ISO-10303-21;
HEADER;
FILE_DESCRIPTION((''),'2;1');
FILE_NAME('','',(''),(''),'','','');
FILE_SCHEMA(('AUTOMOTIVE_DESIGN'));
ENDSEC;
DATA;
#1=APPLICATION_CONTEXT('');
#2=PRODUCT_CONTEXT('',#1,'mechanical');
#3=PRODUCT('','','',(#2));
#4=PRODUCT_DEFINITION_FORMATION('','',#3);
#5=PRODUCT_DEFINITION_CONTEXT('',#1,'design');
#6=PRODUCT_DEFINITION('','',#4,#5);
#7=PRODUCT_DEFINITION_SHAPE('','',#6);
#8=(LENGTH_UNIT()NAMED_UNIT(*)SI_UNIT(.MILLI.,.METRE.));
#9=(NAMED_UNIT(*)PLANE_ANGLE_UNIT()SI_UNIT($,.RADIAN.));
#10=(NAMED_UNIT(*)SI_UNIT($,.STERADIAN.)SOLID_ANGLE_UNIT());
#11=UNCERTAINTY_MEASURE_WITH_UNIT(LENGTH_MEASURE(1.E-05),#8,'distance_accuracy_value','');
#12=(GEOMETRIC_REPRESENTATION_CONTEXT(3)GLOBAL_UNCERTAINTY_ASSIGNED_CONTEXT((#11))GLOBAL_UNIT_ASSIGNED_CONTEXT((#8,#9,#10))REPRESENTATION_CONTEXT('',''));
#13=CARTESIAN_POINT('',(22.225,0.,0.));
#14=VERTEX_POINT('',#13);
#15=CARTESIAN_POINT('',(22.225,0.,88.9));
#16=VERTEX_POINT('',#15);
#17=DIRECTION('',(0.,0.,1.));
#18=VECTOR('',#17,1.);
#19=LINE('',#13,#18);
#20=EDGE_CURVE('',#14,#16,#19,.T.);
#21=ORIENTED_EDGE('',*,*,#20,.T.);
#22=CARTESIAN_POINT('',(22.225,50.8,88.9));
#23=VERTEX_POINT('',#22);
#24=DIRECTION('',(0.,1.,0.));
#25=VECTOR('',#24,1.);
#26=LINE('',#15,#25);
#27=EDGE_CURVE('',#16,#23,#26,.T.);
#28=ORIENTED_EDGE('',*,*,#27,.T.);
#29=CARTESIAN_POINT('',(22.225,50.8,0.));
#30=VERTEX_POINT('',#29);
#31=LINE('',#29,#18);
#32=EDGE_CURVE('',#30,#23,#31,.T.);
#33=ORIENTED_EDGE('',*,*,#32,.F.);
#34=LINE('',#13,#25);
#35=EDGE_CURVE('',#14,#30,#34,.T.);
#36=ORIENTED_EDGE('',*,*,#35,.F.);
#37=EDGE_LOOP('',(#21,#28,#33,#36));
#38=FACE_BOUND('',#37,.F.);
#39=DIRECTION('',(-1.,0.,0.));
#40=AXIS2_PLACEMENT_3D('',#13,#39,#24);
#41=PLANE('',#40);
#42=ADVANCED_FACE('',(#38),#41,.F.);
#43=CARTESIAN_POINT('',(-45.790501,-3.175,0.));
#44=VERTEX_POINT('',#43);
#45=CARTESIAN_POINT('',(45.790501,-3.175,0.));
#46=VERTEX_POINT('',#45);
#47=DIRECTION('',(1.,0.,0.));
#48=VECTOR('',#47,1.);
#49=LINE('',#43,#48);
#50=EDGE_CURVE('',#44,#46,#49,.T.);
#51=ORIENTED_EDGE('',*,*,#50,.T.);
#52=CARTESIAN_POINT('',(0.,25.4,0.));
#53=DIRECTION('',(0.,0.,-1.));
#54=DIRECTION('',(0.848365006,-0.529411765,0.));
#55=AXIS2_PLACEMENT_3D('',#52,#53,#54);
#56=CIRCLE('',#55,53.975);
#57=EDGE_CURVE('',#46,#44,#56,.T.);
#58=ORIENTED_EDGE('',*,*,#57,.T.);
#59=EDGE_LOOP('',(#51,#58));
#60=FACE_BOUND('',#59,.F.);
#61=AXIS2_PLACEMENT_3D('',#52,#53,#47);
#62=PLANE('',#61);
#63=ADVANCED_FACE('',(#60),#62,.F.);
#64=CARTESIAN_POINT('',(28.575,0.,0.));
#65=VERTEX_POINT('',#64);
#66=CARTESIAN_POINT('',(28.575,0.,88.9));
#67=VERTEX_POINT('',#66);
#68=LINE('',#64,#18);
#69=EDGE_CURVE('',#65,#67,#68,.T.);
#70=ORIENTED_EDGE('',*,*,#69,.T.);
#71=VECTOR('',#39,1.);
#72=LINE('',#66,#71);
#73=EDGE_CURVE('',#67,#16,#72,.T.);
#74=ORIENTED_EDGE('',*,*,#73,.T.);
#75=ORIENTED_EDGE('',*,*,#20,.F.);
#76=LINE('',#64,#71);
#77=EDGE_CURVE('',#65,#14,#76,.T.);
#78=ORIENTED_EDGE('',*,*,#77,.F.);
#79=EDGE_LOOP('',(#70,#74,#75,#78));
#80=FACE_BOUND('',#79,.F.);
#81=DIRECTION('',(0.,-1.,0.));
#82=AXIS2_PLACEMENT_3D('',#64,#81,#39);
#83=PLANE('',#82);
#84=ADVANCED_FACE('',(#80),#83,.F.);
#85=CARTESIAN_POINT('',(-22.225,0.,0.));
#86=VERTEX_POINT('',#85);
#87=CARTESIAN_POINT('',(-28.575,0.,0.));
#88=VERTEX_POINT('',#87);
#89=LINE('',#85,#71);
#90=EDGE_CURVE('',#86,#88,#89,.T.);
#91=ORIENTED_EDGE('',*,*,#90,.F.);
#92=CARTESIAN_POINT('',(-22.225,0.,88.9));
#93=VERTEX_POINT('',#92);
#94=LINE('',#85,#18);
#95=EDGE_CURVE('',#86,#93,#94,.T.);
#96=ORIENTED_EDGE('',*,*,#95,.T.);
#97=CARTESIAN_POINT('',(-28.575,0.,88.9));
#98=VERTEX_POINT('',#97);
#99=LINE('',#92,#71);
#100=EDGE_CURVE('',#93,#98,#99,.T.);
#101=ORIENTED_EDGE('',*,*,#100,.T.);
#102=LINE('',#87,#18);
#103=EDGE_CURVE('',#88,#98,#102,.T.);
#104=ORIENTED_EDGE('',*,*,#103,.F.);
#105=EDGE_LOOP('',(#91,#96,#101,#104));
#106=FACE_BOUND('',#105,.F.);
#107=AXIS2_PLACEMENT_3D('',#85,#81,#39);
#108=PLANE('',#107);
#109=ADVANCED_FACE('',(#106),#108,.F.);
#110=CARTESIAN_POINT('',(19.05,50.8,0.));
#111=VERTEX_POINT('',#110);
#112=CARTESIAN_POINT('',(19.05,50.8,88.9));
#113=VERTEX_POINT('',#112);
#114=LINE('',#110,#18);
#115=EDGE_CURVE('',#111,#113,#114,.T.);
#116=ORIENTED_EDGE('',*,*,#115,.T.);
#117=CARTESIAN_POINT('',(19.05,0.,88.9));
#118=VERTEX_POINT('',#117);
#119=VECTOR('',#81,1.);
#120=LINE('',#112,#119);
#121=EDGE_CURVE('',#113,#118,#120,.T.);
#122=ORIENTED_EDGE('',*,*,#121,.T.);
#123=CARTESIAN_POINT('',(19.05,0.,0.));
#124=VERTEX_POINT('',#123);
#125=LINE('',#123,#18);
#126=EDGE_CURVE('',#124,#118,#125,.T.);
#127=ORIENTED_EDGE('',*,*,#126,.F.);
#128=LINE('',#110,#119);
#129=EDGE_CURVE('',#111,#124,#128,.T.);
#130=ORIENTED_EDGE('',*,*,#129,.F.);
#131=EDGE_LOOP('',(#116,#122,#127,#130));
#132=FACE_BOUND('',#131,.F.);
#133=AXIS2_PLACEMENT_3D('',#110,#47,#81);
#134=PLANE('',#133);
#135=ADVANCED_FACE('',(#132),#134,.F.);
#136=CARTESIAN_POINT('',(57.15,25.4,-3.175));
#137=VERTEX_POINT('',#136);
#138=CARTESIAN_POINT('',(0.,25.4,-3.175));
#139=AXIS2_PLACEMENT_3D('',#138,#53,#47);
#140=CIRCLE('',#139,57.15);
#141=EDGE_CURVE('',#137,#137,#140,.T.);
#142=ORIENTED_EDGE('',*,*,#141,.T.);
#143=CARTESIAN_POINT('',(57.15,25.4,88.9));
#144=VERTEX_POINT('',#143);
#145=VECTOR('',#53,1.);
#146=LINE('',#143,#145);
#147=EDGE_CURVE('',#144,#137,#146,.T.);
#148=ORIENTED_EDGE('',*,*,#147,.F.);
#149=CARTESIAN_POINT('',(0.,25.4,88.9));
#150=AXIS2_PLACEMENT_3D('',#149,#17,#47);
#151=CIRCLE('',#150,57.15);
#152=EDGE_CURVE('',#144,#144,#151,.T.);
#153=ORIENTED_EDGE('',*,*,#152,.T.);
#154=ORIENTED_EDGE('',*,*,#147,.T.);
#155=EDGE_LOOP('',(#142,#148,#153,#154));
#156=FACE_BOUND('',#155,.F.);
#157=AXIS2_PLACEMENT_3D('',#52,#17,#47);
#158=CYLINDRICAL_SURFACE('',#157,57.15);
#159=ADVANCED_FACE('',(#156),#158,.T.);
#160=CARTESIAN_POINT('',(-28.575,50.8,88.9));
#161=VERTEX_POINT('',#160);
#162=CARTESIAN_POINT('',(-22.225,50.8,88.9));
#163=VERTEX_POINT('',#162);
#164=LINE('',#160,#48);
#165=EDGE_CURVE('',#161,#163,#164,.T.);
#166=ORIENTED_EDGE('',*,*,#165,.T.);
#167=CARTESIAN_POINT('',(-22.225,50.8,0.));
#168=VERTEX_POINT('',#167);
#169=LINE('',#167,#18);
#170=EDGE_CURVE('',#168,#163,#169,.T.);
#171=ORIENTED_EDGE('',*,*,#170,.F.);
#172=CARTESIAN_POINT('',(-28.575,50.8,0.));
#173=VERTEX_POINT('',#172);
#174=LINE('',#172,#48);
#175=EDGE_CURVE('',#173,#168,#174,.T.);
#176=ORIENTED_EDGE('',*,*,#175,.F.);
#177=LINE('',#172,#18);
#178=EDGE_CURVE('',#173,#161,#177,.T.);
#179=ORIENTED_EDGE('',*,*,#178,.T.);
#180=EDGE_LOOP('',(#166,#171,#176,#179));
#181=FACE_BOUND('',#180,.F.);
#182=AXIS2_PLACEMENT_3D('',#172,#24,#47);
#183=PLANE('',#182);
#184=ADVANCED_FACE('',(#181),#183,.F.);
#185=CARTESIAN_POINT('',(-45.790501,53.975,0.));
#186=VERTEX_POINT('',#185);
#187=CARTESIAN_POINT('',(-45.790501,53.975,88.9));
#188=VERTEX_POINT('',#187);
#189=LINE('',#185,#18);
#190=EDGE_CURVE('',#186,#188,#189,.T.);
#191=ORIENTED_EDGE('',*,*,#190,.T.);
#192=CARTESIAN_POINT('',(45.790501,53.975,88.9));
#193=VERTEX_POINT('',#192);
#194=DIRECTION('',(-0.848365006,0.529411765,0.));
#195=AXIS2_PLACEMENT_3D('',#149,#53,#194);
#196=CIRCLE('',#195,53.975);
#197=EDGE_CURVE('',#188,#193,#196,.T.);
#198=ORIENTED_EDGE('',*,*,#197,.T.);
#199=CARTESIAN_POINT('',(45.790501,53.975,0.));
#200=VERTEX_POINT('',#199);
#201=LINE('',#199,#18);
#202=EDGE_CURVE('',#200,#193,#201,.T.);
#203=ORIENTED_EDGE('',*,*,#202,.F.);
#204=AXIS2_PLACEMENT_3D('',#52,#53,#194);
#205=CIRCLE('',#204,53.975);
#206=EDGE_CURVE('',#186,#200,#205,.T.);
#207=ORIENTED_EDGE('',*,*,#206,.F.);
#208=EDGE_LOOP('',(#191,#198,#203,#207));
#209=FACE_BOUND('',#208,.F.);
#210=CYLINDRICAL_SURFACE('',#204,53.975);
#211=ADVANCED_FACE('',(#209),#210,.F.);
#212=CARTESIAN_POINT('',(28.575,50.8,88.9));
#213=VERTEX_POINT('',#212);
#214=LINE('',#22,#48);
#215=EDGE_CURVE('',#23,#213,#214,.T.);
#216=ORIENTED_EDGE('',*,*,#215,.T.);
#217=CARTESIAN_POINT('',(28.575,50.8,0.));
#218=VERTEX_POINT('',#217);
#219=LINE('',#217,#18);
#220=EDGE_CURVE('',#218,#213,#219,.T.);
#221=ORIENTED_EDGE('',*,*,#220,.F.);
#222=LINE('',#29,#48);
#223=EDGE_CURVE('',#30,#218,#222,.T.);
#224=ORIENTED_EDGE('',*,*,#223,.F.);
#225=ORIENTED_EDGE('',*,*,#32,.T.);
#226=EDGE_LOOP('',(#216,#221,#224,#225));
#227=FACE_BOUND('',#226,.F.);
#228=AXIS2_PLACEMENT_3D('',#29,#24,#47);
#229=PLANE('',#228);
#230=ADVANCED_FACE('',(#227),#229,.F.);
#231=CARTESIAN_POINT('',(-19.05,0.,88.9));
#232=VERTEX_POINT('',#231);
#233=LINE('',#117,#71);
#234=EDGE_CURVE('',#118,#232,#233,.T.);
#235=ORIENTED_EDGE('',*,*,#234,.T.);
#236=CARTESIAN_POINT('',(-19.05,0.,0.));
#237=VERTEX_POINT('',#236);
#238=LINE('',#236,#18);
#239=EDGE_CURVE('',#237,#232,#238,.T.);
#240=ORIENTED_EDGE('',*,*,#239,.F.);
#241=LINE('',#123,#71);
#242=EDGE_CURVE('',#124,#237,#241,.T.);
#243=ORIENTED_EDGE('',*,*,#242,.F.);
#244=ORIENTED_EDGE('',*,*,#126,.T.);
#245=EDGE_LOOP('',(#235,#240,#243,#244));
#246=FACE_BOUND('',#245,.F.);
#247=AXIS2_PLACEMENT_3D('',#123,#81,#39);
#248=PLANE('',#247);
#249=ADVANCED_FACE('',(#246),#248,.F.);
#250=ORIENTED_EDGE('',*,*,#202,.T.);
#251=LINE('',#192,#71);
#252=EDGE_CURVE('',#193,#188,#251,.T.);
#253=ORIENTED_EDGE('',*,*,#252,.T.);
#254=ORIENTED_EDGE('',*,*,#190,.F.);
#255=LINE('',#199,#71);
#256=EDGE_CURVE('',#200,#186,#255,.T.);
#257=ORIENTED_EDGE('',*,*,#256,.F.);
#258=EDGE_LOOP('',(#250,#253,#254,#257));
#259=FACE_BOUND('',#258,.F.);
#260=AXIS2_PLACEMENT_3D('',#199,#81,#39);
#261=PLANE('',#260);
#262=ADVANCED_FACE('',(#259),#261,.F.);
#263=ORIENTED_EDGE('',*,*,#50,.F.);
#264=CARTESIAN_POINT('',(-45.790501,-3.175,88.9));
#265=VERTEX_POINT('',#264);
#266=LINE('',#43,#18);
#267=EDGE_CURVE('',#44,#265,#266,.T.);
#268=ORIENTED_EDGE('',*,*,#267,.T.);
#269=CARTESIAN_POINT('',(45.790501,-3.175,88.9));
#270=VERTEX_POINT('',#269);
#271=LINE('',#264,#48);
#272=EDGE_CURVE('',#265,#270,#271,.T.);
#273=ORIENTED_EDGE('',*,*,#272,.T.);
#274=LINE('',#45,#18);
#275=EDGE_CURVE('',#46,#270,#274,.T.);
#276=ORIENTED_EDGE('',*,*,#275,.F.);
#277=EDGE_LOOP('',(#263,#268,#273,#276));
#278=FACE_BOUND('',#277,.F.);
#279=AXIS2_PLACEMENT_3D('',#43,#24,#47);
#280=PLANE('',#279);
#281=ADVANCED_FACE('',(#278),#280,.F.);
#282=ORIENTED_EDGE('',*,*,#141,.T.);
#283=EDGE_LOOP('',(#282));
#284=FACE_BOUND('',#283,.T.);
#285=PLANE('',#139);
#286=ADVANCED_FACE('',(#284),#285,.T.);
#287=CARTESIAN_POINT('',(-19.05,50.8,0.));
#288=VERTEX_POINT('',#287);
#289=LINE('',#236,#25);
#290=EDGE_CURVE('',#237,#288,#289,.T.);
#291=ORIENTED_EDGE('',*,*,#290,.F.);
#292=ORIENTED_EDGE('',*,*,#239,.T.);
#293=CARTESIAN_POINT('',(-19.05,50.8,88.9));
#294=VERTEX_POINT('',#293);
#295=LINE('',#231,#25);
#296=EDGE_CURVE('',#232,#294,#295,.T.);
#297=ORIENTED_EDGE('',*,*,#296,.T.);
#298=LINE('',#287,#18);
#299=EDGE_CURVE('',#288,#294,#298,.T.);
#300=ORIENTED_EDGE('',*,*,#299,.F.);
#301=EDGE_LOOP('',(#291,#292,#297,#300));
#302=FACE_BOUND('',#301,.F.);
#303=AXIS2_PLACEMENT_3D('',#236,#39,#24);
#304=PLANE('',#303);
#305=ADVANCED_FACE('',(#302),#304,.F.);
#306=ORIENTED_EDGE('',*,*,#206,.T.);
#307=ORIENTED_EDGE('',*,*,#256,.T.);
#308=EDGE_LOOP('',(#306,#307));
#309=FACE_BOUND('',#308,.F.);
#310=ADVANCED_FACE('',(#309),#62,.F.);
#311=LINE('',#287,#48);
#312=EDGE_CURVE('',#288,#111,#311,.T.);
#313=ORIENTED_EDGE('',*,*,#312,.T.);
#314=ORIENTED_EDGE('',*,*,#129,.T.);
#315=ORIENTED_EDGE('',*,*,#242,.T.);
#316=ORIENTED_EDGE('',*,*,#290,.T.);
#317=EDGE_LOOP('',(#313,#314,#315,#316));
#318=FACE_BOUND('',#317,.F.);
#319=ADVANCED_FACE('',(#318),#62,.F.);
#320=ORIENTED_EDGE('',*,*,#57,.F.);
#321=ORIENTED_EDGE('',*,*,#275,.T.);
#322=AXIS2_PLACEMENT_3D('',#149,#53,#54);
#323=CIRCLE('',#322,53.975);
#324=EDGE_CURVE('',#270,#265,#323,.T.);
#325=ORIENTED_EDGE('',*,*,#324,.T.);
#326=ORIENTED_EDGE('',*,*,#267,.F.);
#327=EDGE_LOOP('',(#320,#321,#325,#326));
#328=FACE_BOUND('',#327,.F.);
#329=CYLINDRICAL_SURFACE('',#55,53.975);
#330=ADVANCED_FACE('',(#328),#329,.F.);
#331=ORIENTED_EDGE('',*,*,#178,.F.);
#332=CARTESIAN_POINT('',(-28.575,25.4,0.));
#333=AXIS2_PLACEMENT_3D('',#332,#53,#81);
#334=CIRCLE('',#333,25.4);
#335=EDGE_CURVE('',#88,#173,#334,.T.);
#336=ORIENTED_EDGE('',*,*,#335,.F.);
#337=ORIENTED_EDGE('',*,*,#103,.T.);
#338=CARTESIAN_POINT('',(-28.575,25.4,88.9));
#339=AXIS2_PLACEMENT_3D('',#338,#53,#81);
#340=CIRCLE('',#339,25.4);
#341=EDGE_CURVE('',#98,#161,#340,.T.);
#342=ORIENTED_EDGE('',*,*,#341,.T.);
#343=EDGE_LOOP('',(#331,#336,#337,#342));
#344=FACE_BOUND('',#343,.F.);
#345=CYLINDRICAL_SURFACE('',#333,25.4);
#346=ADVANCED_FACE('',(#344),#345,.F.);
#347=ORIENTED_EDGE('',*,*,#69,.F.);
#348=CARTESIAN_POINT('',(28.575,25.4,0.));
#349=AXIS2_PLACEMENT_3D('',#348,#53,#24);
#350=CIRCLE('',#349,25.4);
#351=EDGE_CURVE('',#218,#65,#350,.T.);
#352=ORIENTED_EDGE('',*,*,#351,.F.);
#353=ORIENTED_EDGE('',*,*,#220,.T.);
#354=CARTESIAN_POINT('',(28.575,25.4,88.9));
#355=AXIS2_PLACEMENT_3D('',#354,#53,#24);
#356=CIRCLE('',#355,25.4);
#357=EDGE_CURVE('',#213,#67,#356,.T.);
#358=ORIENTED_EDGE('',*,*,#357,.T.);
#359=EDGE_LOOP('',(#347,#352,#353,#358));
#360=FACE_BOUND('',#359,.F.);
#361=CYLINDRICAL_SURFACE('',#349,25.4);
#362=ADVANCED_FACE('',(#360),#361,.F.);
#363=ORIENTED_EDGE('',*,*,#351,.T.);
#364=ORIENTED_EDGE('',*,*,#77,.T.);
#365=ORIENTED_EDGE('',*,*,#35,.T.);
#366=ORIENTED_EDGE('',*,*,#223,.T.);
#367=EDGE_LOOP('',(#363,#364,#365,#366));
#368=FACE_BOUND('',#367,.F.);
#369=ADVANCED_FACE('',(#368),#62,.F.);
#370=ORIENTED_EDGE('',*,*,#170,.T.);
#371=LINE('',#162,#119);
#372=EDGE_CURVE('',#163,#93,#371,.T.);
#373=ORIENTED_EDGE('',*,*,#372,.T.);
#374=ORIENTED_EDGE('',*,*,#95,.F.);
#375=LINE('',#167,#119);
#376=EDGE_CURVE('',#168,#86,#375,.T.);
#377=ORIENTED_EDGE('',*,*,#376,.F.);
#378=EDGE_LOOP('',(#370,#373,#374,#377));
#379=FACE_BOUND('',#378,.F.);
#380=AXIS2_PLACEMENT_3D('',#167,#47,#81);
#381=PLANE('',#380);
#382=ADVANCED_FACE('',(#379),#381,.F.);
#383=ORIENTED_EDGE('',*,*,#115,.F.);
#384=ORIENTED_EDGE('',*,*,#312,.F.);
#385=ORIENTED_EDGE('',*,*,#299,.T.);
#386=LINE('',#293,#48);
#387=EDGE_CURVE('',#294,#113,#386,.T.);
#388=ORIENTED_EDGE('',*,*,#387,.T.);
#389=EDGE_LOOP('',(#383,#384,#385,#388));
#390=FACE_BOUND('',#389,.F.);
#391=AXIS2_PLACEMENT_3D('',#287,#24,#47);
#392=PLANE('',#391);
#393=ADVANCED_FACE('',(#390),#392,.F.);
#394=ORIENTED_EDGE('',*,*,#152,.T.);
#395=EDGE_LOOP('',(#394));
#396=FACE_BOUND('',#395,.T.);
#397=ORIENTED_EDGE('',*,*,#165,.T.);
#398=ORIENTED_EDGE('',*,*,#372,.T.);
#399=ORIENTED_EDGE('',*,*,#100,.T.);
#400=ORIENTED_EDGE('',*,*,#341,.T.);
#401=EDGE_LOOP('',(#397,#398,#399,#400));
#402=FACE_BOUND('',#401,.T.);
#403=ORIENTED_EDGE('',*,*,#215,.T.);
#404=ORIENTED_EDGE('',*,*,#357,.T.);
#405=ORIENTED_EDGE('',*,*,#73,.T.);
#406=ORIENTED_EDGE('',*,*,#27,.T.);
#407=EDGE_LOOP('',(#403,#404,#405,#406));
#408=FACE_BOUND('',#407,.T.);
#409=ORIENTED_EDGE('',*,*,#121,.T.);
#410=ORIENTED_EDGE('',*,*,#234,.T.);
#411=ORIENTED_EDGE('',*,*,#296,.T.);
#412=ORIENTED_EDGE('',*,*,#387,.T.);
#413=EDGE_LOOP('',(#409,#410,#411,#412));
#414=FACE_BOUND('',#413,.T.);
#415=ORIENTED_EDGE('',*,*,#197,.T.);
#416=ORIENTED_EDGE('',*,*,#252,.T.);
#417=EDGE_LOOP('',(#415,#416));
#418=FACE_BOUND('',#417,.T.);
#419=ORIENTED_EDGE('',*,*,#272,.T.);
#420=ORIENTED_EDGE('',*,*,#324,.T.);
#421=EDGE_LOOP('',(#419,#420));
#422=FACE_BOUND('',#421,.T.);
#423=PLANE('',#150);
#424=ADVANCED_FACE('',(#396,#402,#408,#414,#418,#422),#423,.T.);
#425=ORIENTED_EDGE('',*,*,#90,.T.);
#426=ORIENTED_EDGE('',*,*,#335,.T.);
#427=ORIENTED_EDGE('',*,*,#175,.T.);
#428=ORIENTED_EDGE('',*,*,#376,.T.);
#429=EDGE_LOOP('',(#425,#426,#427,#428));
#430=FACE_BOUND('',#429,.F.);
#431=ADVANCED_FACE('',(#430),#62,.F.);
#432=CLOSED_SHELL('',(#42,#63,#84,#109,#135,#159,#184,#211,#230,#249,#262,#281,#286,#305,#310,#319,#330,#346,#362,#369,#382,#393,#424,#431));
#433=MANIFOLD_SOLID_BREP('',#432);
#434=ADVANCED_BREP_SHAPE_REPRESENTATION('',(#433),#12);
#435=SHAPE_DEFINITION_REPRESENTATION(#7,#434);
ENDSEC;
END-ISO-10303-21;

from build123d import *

# Parameters (mm, degrees)
F2_R     = 57.15
F3_DEPTH = 88.9
F0_R     = 57.15
F1_DEPTH = 3.175


# Not quite as in the source:
# - a feature names something its author has since deleted; it is built from what else it names


with BuildPart() as f3:
    # F2 (on Top) → F3 (new body)
    with BuildSketch(Plane.XY):
        with Locations((0, 25.4)):
            Circle(F2_R)
        with BuildLine():
            ThreePointArc((45.7905011984, -3.175), (0, -28.575), (-45.7905011984, -3.175))
            Line((-45.7905011984, -3.175), (45.7905011984, -3.175))
        make_face(mode=Mode.SUBTRACT)
        with BuildLine():
            Line((-22.225, 50.8), (-22.225, 0))
            Line((-22.225, 0), (-28.575, 0))
            ThreePointArc((-28.575, 0), (-53.975, 25.4), (-28.575, 50.8))
            Line((-28.575, 50.8), (-22.225, 50.8))
        make_face(mode=Mode.SUBTRACT)
        Polygon((19.05, 0), (0, 0), (-19.05, 0), (-19.05, 50.8), (0, 50.8), (19.05, 50.8), align=None, mode=Mode.SUBTRACT)
        with BuildLine():
            Line((28.575, 0), (22.225, 0))
            Line((22.225, 0), (22.225, 50.8))
            Line((22.225, 50.8), (28.575, 50.8))
            ThreePointArc((28.575, 50.8), (53.975, 25.4), (28.575, 0))
        make_face(mode=Mode.SUBTRACT)
        with BuildLine():
            Line((45.7905011984, 53.975), (-45.7905011984, 53.975))
            ThreePointArc((-45.7905011984, 53.975), (0, 79.375), (45.7905011984, 53.975))
        make_face(mode=Mode.SUBTRACT)
    extrude(amount=F3_DEPTH)

    # F0 (on face) → F1 (join)
    with BuildSketch(Plane(origin=(0, 0, 0), x_dir=(1, 0, 0), z_dir=(0, 0, -1))):
        with Locations((0, -25.4)):
            Circle(F0_R)
    extrude(amount=F1_DEPTH)


solid = f3.part
